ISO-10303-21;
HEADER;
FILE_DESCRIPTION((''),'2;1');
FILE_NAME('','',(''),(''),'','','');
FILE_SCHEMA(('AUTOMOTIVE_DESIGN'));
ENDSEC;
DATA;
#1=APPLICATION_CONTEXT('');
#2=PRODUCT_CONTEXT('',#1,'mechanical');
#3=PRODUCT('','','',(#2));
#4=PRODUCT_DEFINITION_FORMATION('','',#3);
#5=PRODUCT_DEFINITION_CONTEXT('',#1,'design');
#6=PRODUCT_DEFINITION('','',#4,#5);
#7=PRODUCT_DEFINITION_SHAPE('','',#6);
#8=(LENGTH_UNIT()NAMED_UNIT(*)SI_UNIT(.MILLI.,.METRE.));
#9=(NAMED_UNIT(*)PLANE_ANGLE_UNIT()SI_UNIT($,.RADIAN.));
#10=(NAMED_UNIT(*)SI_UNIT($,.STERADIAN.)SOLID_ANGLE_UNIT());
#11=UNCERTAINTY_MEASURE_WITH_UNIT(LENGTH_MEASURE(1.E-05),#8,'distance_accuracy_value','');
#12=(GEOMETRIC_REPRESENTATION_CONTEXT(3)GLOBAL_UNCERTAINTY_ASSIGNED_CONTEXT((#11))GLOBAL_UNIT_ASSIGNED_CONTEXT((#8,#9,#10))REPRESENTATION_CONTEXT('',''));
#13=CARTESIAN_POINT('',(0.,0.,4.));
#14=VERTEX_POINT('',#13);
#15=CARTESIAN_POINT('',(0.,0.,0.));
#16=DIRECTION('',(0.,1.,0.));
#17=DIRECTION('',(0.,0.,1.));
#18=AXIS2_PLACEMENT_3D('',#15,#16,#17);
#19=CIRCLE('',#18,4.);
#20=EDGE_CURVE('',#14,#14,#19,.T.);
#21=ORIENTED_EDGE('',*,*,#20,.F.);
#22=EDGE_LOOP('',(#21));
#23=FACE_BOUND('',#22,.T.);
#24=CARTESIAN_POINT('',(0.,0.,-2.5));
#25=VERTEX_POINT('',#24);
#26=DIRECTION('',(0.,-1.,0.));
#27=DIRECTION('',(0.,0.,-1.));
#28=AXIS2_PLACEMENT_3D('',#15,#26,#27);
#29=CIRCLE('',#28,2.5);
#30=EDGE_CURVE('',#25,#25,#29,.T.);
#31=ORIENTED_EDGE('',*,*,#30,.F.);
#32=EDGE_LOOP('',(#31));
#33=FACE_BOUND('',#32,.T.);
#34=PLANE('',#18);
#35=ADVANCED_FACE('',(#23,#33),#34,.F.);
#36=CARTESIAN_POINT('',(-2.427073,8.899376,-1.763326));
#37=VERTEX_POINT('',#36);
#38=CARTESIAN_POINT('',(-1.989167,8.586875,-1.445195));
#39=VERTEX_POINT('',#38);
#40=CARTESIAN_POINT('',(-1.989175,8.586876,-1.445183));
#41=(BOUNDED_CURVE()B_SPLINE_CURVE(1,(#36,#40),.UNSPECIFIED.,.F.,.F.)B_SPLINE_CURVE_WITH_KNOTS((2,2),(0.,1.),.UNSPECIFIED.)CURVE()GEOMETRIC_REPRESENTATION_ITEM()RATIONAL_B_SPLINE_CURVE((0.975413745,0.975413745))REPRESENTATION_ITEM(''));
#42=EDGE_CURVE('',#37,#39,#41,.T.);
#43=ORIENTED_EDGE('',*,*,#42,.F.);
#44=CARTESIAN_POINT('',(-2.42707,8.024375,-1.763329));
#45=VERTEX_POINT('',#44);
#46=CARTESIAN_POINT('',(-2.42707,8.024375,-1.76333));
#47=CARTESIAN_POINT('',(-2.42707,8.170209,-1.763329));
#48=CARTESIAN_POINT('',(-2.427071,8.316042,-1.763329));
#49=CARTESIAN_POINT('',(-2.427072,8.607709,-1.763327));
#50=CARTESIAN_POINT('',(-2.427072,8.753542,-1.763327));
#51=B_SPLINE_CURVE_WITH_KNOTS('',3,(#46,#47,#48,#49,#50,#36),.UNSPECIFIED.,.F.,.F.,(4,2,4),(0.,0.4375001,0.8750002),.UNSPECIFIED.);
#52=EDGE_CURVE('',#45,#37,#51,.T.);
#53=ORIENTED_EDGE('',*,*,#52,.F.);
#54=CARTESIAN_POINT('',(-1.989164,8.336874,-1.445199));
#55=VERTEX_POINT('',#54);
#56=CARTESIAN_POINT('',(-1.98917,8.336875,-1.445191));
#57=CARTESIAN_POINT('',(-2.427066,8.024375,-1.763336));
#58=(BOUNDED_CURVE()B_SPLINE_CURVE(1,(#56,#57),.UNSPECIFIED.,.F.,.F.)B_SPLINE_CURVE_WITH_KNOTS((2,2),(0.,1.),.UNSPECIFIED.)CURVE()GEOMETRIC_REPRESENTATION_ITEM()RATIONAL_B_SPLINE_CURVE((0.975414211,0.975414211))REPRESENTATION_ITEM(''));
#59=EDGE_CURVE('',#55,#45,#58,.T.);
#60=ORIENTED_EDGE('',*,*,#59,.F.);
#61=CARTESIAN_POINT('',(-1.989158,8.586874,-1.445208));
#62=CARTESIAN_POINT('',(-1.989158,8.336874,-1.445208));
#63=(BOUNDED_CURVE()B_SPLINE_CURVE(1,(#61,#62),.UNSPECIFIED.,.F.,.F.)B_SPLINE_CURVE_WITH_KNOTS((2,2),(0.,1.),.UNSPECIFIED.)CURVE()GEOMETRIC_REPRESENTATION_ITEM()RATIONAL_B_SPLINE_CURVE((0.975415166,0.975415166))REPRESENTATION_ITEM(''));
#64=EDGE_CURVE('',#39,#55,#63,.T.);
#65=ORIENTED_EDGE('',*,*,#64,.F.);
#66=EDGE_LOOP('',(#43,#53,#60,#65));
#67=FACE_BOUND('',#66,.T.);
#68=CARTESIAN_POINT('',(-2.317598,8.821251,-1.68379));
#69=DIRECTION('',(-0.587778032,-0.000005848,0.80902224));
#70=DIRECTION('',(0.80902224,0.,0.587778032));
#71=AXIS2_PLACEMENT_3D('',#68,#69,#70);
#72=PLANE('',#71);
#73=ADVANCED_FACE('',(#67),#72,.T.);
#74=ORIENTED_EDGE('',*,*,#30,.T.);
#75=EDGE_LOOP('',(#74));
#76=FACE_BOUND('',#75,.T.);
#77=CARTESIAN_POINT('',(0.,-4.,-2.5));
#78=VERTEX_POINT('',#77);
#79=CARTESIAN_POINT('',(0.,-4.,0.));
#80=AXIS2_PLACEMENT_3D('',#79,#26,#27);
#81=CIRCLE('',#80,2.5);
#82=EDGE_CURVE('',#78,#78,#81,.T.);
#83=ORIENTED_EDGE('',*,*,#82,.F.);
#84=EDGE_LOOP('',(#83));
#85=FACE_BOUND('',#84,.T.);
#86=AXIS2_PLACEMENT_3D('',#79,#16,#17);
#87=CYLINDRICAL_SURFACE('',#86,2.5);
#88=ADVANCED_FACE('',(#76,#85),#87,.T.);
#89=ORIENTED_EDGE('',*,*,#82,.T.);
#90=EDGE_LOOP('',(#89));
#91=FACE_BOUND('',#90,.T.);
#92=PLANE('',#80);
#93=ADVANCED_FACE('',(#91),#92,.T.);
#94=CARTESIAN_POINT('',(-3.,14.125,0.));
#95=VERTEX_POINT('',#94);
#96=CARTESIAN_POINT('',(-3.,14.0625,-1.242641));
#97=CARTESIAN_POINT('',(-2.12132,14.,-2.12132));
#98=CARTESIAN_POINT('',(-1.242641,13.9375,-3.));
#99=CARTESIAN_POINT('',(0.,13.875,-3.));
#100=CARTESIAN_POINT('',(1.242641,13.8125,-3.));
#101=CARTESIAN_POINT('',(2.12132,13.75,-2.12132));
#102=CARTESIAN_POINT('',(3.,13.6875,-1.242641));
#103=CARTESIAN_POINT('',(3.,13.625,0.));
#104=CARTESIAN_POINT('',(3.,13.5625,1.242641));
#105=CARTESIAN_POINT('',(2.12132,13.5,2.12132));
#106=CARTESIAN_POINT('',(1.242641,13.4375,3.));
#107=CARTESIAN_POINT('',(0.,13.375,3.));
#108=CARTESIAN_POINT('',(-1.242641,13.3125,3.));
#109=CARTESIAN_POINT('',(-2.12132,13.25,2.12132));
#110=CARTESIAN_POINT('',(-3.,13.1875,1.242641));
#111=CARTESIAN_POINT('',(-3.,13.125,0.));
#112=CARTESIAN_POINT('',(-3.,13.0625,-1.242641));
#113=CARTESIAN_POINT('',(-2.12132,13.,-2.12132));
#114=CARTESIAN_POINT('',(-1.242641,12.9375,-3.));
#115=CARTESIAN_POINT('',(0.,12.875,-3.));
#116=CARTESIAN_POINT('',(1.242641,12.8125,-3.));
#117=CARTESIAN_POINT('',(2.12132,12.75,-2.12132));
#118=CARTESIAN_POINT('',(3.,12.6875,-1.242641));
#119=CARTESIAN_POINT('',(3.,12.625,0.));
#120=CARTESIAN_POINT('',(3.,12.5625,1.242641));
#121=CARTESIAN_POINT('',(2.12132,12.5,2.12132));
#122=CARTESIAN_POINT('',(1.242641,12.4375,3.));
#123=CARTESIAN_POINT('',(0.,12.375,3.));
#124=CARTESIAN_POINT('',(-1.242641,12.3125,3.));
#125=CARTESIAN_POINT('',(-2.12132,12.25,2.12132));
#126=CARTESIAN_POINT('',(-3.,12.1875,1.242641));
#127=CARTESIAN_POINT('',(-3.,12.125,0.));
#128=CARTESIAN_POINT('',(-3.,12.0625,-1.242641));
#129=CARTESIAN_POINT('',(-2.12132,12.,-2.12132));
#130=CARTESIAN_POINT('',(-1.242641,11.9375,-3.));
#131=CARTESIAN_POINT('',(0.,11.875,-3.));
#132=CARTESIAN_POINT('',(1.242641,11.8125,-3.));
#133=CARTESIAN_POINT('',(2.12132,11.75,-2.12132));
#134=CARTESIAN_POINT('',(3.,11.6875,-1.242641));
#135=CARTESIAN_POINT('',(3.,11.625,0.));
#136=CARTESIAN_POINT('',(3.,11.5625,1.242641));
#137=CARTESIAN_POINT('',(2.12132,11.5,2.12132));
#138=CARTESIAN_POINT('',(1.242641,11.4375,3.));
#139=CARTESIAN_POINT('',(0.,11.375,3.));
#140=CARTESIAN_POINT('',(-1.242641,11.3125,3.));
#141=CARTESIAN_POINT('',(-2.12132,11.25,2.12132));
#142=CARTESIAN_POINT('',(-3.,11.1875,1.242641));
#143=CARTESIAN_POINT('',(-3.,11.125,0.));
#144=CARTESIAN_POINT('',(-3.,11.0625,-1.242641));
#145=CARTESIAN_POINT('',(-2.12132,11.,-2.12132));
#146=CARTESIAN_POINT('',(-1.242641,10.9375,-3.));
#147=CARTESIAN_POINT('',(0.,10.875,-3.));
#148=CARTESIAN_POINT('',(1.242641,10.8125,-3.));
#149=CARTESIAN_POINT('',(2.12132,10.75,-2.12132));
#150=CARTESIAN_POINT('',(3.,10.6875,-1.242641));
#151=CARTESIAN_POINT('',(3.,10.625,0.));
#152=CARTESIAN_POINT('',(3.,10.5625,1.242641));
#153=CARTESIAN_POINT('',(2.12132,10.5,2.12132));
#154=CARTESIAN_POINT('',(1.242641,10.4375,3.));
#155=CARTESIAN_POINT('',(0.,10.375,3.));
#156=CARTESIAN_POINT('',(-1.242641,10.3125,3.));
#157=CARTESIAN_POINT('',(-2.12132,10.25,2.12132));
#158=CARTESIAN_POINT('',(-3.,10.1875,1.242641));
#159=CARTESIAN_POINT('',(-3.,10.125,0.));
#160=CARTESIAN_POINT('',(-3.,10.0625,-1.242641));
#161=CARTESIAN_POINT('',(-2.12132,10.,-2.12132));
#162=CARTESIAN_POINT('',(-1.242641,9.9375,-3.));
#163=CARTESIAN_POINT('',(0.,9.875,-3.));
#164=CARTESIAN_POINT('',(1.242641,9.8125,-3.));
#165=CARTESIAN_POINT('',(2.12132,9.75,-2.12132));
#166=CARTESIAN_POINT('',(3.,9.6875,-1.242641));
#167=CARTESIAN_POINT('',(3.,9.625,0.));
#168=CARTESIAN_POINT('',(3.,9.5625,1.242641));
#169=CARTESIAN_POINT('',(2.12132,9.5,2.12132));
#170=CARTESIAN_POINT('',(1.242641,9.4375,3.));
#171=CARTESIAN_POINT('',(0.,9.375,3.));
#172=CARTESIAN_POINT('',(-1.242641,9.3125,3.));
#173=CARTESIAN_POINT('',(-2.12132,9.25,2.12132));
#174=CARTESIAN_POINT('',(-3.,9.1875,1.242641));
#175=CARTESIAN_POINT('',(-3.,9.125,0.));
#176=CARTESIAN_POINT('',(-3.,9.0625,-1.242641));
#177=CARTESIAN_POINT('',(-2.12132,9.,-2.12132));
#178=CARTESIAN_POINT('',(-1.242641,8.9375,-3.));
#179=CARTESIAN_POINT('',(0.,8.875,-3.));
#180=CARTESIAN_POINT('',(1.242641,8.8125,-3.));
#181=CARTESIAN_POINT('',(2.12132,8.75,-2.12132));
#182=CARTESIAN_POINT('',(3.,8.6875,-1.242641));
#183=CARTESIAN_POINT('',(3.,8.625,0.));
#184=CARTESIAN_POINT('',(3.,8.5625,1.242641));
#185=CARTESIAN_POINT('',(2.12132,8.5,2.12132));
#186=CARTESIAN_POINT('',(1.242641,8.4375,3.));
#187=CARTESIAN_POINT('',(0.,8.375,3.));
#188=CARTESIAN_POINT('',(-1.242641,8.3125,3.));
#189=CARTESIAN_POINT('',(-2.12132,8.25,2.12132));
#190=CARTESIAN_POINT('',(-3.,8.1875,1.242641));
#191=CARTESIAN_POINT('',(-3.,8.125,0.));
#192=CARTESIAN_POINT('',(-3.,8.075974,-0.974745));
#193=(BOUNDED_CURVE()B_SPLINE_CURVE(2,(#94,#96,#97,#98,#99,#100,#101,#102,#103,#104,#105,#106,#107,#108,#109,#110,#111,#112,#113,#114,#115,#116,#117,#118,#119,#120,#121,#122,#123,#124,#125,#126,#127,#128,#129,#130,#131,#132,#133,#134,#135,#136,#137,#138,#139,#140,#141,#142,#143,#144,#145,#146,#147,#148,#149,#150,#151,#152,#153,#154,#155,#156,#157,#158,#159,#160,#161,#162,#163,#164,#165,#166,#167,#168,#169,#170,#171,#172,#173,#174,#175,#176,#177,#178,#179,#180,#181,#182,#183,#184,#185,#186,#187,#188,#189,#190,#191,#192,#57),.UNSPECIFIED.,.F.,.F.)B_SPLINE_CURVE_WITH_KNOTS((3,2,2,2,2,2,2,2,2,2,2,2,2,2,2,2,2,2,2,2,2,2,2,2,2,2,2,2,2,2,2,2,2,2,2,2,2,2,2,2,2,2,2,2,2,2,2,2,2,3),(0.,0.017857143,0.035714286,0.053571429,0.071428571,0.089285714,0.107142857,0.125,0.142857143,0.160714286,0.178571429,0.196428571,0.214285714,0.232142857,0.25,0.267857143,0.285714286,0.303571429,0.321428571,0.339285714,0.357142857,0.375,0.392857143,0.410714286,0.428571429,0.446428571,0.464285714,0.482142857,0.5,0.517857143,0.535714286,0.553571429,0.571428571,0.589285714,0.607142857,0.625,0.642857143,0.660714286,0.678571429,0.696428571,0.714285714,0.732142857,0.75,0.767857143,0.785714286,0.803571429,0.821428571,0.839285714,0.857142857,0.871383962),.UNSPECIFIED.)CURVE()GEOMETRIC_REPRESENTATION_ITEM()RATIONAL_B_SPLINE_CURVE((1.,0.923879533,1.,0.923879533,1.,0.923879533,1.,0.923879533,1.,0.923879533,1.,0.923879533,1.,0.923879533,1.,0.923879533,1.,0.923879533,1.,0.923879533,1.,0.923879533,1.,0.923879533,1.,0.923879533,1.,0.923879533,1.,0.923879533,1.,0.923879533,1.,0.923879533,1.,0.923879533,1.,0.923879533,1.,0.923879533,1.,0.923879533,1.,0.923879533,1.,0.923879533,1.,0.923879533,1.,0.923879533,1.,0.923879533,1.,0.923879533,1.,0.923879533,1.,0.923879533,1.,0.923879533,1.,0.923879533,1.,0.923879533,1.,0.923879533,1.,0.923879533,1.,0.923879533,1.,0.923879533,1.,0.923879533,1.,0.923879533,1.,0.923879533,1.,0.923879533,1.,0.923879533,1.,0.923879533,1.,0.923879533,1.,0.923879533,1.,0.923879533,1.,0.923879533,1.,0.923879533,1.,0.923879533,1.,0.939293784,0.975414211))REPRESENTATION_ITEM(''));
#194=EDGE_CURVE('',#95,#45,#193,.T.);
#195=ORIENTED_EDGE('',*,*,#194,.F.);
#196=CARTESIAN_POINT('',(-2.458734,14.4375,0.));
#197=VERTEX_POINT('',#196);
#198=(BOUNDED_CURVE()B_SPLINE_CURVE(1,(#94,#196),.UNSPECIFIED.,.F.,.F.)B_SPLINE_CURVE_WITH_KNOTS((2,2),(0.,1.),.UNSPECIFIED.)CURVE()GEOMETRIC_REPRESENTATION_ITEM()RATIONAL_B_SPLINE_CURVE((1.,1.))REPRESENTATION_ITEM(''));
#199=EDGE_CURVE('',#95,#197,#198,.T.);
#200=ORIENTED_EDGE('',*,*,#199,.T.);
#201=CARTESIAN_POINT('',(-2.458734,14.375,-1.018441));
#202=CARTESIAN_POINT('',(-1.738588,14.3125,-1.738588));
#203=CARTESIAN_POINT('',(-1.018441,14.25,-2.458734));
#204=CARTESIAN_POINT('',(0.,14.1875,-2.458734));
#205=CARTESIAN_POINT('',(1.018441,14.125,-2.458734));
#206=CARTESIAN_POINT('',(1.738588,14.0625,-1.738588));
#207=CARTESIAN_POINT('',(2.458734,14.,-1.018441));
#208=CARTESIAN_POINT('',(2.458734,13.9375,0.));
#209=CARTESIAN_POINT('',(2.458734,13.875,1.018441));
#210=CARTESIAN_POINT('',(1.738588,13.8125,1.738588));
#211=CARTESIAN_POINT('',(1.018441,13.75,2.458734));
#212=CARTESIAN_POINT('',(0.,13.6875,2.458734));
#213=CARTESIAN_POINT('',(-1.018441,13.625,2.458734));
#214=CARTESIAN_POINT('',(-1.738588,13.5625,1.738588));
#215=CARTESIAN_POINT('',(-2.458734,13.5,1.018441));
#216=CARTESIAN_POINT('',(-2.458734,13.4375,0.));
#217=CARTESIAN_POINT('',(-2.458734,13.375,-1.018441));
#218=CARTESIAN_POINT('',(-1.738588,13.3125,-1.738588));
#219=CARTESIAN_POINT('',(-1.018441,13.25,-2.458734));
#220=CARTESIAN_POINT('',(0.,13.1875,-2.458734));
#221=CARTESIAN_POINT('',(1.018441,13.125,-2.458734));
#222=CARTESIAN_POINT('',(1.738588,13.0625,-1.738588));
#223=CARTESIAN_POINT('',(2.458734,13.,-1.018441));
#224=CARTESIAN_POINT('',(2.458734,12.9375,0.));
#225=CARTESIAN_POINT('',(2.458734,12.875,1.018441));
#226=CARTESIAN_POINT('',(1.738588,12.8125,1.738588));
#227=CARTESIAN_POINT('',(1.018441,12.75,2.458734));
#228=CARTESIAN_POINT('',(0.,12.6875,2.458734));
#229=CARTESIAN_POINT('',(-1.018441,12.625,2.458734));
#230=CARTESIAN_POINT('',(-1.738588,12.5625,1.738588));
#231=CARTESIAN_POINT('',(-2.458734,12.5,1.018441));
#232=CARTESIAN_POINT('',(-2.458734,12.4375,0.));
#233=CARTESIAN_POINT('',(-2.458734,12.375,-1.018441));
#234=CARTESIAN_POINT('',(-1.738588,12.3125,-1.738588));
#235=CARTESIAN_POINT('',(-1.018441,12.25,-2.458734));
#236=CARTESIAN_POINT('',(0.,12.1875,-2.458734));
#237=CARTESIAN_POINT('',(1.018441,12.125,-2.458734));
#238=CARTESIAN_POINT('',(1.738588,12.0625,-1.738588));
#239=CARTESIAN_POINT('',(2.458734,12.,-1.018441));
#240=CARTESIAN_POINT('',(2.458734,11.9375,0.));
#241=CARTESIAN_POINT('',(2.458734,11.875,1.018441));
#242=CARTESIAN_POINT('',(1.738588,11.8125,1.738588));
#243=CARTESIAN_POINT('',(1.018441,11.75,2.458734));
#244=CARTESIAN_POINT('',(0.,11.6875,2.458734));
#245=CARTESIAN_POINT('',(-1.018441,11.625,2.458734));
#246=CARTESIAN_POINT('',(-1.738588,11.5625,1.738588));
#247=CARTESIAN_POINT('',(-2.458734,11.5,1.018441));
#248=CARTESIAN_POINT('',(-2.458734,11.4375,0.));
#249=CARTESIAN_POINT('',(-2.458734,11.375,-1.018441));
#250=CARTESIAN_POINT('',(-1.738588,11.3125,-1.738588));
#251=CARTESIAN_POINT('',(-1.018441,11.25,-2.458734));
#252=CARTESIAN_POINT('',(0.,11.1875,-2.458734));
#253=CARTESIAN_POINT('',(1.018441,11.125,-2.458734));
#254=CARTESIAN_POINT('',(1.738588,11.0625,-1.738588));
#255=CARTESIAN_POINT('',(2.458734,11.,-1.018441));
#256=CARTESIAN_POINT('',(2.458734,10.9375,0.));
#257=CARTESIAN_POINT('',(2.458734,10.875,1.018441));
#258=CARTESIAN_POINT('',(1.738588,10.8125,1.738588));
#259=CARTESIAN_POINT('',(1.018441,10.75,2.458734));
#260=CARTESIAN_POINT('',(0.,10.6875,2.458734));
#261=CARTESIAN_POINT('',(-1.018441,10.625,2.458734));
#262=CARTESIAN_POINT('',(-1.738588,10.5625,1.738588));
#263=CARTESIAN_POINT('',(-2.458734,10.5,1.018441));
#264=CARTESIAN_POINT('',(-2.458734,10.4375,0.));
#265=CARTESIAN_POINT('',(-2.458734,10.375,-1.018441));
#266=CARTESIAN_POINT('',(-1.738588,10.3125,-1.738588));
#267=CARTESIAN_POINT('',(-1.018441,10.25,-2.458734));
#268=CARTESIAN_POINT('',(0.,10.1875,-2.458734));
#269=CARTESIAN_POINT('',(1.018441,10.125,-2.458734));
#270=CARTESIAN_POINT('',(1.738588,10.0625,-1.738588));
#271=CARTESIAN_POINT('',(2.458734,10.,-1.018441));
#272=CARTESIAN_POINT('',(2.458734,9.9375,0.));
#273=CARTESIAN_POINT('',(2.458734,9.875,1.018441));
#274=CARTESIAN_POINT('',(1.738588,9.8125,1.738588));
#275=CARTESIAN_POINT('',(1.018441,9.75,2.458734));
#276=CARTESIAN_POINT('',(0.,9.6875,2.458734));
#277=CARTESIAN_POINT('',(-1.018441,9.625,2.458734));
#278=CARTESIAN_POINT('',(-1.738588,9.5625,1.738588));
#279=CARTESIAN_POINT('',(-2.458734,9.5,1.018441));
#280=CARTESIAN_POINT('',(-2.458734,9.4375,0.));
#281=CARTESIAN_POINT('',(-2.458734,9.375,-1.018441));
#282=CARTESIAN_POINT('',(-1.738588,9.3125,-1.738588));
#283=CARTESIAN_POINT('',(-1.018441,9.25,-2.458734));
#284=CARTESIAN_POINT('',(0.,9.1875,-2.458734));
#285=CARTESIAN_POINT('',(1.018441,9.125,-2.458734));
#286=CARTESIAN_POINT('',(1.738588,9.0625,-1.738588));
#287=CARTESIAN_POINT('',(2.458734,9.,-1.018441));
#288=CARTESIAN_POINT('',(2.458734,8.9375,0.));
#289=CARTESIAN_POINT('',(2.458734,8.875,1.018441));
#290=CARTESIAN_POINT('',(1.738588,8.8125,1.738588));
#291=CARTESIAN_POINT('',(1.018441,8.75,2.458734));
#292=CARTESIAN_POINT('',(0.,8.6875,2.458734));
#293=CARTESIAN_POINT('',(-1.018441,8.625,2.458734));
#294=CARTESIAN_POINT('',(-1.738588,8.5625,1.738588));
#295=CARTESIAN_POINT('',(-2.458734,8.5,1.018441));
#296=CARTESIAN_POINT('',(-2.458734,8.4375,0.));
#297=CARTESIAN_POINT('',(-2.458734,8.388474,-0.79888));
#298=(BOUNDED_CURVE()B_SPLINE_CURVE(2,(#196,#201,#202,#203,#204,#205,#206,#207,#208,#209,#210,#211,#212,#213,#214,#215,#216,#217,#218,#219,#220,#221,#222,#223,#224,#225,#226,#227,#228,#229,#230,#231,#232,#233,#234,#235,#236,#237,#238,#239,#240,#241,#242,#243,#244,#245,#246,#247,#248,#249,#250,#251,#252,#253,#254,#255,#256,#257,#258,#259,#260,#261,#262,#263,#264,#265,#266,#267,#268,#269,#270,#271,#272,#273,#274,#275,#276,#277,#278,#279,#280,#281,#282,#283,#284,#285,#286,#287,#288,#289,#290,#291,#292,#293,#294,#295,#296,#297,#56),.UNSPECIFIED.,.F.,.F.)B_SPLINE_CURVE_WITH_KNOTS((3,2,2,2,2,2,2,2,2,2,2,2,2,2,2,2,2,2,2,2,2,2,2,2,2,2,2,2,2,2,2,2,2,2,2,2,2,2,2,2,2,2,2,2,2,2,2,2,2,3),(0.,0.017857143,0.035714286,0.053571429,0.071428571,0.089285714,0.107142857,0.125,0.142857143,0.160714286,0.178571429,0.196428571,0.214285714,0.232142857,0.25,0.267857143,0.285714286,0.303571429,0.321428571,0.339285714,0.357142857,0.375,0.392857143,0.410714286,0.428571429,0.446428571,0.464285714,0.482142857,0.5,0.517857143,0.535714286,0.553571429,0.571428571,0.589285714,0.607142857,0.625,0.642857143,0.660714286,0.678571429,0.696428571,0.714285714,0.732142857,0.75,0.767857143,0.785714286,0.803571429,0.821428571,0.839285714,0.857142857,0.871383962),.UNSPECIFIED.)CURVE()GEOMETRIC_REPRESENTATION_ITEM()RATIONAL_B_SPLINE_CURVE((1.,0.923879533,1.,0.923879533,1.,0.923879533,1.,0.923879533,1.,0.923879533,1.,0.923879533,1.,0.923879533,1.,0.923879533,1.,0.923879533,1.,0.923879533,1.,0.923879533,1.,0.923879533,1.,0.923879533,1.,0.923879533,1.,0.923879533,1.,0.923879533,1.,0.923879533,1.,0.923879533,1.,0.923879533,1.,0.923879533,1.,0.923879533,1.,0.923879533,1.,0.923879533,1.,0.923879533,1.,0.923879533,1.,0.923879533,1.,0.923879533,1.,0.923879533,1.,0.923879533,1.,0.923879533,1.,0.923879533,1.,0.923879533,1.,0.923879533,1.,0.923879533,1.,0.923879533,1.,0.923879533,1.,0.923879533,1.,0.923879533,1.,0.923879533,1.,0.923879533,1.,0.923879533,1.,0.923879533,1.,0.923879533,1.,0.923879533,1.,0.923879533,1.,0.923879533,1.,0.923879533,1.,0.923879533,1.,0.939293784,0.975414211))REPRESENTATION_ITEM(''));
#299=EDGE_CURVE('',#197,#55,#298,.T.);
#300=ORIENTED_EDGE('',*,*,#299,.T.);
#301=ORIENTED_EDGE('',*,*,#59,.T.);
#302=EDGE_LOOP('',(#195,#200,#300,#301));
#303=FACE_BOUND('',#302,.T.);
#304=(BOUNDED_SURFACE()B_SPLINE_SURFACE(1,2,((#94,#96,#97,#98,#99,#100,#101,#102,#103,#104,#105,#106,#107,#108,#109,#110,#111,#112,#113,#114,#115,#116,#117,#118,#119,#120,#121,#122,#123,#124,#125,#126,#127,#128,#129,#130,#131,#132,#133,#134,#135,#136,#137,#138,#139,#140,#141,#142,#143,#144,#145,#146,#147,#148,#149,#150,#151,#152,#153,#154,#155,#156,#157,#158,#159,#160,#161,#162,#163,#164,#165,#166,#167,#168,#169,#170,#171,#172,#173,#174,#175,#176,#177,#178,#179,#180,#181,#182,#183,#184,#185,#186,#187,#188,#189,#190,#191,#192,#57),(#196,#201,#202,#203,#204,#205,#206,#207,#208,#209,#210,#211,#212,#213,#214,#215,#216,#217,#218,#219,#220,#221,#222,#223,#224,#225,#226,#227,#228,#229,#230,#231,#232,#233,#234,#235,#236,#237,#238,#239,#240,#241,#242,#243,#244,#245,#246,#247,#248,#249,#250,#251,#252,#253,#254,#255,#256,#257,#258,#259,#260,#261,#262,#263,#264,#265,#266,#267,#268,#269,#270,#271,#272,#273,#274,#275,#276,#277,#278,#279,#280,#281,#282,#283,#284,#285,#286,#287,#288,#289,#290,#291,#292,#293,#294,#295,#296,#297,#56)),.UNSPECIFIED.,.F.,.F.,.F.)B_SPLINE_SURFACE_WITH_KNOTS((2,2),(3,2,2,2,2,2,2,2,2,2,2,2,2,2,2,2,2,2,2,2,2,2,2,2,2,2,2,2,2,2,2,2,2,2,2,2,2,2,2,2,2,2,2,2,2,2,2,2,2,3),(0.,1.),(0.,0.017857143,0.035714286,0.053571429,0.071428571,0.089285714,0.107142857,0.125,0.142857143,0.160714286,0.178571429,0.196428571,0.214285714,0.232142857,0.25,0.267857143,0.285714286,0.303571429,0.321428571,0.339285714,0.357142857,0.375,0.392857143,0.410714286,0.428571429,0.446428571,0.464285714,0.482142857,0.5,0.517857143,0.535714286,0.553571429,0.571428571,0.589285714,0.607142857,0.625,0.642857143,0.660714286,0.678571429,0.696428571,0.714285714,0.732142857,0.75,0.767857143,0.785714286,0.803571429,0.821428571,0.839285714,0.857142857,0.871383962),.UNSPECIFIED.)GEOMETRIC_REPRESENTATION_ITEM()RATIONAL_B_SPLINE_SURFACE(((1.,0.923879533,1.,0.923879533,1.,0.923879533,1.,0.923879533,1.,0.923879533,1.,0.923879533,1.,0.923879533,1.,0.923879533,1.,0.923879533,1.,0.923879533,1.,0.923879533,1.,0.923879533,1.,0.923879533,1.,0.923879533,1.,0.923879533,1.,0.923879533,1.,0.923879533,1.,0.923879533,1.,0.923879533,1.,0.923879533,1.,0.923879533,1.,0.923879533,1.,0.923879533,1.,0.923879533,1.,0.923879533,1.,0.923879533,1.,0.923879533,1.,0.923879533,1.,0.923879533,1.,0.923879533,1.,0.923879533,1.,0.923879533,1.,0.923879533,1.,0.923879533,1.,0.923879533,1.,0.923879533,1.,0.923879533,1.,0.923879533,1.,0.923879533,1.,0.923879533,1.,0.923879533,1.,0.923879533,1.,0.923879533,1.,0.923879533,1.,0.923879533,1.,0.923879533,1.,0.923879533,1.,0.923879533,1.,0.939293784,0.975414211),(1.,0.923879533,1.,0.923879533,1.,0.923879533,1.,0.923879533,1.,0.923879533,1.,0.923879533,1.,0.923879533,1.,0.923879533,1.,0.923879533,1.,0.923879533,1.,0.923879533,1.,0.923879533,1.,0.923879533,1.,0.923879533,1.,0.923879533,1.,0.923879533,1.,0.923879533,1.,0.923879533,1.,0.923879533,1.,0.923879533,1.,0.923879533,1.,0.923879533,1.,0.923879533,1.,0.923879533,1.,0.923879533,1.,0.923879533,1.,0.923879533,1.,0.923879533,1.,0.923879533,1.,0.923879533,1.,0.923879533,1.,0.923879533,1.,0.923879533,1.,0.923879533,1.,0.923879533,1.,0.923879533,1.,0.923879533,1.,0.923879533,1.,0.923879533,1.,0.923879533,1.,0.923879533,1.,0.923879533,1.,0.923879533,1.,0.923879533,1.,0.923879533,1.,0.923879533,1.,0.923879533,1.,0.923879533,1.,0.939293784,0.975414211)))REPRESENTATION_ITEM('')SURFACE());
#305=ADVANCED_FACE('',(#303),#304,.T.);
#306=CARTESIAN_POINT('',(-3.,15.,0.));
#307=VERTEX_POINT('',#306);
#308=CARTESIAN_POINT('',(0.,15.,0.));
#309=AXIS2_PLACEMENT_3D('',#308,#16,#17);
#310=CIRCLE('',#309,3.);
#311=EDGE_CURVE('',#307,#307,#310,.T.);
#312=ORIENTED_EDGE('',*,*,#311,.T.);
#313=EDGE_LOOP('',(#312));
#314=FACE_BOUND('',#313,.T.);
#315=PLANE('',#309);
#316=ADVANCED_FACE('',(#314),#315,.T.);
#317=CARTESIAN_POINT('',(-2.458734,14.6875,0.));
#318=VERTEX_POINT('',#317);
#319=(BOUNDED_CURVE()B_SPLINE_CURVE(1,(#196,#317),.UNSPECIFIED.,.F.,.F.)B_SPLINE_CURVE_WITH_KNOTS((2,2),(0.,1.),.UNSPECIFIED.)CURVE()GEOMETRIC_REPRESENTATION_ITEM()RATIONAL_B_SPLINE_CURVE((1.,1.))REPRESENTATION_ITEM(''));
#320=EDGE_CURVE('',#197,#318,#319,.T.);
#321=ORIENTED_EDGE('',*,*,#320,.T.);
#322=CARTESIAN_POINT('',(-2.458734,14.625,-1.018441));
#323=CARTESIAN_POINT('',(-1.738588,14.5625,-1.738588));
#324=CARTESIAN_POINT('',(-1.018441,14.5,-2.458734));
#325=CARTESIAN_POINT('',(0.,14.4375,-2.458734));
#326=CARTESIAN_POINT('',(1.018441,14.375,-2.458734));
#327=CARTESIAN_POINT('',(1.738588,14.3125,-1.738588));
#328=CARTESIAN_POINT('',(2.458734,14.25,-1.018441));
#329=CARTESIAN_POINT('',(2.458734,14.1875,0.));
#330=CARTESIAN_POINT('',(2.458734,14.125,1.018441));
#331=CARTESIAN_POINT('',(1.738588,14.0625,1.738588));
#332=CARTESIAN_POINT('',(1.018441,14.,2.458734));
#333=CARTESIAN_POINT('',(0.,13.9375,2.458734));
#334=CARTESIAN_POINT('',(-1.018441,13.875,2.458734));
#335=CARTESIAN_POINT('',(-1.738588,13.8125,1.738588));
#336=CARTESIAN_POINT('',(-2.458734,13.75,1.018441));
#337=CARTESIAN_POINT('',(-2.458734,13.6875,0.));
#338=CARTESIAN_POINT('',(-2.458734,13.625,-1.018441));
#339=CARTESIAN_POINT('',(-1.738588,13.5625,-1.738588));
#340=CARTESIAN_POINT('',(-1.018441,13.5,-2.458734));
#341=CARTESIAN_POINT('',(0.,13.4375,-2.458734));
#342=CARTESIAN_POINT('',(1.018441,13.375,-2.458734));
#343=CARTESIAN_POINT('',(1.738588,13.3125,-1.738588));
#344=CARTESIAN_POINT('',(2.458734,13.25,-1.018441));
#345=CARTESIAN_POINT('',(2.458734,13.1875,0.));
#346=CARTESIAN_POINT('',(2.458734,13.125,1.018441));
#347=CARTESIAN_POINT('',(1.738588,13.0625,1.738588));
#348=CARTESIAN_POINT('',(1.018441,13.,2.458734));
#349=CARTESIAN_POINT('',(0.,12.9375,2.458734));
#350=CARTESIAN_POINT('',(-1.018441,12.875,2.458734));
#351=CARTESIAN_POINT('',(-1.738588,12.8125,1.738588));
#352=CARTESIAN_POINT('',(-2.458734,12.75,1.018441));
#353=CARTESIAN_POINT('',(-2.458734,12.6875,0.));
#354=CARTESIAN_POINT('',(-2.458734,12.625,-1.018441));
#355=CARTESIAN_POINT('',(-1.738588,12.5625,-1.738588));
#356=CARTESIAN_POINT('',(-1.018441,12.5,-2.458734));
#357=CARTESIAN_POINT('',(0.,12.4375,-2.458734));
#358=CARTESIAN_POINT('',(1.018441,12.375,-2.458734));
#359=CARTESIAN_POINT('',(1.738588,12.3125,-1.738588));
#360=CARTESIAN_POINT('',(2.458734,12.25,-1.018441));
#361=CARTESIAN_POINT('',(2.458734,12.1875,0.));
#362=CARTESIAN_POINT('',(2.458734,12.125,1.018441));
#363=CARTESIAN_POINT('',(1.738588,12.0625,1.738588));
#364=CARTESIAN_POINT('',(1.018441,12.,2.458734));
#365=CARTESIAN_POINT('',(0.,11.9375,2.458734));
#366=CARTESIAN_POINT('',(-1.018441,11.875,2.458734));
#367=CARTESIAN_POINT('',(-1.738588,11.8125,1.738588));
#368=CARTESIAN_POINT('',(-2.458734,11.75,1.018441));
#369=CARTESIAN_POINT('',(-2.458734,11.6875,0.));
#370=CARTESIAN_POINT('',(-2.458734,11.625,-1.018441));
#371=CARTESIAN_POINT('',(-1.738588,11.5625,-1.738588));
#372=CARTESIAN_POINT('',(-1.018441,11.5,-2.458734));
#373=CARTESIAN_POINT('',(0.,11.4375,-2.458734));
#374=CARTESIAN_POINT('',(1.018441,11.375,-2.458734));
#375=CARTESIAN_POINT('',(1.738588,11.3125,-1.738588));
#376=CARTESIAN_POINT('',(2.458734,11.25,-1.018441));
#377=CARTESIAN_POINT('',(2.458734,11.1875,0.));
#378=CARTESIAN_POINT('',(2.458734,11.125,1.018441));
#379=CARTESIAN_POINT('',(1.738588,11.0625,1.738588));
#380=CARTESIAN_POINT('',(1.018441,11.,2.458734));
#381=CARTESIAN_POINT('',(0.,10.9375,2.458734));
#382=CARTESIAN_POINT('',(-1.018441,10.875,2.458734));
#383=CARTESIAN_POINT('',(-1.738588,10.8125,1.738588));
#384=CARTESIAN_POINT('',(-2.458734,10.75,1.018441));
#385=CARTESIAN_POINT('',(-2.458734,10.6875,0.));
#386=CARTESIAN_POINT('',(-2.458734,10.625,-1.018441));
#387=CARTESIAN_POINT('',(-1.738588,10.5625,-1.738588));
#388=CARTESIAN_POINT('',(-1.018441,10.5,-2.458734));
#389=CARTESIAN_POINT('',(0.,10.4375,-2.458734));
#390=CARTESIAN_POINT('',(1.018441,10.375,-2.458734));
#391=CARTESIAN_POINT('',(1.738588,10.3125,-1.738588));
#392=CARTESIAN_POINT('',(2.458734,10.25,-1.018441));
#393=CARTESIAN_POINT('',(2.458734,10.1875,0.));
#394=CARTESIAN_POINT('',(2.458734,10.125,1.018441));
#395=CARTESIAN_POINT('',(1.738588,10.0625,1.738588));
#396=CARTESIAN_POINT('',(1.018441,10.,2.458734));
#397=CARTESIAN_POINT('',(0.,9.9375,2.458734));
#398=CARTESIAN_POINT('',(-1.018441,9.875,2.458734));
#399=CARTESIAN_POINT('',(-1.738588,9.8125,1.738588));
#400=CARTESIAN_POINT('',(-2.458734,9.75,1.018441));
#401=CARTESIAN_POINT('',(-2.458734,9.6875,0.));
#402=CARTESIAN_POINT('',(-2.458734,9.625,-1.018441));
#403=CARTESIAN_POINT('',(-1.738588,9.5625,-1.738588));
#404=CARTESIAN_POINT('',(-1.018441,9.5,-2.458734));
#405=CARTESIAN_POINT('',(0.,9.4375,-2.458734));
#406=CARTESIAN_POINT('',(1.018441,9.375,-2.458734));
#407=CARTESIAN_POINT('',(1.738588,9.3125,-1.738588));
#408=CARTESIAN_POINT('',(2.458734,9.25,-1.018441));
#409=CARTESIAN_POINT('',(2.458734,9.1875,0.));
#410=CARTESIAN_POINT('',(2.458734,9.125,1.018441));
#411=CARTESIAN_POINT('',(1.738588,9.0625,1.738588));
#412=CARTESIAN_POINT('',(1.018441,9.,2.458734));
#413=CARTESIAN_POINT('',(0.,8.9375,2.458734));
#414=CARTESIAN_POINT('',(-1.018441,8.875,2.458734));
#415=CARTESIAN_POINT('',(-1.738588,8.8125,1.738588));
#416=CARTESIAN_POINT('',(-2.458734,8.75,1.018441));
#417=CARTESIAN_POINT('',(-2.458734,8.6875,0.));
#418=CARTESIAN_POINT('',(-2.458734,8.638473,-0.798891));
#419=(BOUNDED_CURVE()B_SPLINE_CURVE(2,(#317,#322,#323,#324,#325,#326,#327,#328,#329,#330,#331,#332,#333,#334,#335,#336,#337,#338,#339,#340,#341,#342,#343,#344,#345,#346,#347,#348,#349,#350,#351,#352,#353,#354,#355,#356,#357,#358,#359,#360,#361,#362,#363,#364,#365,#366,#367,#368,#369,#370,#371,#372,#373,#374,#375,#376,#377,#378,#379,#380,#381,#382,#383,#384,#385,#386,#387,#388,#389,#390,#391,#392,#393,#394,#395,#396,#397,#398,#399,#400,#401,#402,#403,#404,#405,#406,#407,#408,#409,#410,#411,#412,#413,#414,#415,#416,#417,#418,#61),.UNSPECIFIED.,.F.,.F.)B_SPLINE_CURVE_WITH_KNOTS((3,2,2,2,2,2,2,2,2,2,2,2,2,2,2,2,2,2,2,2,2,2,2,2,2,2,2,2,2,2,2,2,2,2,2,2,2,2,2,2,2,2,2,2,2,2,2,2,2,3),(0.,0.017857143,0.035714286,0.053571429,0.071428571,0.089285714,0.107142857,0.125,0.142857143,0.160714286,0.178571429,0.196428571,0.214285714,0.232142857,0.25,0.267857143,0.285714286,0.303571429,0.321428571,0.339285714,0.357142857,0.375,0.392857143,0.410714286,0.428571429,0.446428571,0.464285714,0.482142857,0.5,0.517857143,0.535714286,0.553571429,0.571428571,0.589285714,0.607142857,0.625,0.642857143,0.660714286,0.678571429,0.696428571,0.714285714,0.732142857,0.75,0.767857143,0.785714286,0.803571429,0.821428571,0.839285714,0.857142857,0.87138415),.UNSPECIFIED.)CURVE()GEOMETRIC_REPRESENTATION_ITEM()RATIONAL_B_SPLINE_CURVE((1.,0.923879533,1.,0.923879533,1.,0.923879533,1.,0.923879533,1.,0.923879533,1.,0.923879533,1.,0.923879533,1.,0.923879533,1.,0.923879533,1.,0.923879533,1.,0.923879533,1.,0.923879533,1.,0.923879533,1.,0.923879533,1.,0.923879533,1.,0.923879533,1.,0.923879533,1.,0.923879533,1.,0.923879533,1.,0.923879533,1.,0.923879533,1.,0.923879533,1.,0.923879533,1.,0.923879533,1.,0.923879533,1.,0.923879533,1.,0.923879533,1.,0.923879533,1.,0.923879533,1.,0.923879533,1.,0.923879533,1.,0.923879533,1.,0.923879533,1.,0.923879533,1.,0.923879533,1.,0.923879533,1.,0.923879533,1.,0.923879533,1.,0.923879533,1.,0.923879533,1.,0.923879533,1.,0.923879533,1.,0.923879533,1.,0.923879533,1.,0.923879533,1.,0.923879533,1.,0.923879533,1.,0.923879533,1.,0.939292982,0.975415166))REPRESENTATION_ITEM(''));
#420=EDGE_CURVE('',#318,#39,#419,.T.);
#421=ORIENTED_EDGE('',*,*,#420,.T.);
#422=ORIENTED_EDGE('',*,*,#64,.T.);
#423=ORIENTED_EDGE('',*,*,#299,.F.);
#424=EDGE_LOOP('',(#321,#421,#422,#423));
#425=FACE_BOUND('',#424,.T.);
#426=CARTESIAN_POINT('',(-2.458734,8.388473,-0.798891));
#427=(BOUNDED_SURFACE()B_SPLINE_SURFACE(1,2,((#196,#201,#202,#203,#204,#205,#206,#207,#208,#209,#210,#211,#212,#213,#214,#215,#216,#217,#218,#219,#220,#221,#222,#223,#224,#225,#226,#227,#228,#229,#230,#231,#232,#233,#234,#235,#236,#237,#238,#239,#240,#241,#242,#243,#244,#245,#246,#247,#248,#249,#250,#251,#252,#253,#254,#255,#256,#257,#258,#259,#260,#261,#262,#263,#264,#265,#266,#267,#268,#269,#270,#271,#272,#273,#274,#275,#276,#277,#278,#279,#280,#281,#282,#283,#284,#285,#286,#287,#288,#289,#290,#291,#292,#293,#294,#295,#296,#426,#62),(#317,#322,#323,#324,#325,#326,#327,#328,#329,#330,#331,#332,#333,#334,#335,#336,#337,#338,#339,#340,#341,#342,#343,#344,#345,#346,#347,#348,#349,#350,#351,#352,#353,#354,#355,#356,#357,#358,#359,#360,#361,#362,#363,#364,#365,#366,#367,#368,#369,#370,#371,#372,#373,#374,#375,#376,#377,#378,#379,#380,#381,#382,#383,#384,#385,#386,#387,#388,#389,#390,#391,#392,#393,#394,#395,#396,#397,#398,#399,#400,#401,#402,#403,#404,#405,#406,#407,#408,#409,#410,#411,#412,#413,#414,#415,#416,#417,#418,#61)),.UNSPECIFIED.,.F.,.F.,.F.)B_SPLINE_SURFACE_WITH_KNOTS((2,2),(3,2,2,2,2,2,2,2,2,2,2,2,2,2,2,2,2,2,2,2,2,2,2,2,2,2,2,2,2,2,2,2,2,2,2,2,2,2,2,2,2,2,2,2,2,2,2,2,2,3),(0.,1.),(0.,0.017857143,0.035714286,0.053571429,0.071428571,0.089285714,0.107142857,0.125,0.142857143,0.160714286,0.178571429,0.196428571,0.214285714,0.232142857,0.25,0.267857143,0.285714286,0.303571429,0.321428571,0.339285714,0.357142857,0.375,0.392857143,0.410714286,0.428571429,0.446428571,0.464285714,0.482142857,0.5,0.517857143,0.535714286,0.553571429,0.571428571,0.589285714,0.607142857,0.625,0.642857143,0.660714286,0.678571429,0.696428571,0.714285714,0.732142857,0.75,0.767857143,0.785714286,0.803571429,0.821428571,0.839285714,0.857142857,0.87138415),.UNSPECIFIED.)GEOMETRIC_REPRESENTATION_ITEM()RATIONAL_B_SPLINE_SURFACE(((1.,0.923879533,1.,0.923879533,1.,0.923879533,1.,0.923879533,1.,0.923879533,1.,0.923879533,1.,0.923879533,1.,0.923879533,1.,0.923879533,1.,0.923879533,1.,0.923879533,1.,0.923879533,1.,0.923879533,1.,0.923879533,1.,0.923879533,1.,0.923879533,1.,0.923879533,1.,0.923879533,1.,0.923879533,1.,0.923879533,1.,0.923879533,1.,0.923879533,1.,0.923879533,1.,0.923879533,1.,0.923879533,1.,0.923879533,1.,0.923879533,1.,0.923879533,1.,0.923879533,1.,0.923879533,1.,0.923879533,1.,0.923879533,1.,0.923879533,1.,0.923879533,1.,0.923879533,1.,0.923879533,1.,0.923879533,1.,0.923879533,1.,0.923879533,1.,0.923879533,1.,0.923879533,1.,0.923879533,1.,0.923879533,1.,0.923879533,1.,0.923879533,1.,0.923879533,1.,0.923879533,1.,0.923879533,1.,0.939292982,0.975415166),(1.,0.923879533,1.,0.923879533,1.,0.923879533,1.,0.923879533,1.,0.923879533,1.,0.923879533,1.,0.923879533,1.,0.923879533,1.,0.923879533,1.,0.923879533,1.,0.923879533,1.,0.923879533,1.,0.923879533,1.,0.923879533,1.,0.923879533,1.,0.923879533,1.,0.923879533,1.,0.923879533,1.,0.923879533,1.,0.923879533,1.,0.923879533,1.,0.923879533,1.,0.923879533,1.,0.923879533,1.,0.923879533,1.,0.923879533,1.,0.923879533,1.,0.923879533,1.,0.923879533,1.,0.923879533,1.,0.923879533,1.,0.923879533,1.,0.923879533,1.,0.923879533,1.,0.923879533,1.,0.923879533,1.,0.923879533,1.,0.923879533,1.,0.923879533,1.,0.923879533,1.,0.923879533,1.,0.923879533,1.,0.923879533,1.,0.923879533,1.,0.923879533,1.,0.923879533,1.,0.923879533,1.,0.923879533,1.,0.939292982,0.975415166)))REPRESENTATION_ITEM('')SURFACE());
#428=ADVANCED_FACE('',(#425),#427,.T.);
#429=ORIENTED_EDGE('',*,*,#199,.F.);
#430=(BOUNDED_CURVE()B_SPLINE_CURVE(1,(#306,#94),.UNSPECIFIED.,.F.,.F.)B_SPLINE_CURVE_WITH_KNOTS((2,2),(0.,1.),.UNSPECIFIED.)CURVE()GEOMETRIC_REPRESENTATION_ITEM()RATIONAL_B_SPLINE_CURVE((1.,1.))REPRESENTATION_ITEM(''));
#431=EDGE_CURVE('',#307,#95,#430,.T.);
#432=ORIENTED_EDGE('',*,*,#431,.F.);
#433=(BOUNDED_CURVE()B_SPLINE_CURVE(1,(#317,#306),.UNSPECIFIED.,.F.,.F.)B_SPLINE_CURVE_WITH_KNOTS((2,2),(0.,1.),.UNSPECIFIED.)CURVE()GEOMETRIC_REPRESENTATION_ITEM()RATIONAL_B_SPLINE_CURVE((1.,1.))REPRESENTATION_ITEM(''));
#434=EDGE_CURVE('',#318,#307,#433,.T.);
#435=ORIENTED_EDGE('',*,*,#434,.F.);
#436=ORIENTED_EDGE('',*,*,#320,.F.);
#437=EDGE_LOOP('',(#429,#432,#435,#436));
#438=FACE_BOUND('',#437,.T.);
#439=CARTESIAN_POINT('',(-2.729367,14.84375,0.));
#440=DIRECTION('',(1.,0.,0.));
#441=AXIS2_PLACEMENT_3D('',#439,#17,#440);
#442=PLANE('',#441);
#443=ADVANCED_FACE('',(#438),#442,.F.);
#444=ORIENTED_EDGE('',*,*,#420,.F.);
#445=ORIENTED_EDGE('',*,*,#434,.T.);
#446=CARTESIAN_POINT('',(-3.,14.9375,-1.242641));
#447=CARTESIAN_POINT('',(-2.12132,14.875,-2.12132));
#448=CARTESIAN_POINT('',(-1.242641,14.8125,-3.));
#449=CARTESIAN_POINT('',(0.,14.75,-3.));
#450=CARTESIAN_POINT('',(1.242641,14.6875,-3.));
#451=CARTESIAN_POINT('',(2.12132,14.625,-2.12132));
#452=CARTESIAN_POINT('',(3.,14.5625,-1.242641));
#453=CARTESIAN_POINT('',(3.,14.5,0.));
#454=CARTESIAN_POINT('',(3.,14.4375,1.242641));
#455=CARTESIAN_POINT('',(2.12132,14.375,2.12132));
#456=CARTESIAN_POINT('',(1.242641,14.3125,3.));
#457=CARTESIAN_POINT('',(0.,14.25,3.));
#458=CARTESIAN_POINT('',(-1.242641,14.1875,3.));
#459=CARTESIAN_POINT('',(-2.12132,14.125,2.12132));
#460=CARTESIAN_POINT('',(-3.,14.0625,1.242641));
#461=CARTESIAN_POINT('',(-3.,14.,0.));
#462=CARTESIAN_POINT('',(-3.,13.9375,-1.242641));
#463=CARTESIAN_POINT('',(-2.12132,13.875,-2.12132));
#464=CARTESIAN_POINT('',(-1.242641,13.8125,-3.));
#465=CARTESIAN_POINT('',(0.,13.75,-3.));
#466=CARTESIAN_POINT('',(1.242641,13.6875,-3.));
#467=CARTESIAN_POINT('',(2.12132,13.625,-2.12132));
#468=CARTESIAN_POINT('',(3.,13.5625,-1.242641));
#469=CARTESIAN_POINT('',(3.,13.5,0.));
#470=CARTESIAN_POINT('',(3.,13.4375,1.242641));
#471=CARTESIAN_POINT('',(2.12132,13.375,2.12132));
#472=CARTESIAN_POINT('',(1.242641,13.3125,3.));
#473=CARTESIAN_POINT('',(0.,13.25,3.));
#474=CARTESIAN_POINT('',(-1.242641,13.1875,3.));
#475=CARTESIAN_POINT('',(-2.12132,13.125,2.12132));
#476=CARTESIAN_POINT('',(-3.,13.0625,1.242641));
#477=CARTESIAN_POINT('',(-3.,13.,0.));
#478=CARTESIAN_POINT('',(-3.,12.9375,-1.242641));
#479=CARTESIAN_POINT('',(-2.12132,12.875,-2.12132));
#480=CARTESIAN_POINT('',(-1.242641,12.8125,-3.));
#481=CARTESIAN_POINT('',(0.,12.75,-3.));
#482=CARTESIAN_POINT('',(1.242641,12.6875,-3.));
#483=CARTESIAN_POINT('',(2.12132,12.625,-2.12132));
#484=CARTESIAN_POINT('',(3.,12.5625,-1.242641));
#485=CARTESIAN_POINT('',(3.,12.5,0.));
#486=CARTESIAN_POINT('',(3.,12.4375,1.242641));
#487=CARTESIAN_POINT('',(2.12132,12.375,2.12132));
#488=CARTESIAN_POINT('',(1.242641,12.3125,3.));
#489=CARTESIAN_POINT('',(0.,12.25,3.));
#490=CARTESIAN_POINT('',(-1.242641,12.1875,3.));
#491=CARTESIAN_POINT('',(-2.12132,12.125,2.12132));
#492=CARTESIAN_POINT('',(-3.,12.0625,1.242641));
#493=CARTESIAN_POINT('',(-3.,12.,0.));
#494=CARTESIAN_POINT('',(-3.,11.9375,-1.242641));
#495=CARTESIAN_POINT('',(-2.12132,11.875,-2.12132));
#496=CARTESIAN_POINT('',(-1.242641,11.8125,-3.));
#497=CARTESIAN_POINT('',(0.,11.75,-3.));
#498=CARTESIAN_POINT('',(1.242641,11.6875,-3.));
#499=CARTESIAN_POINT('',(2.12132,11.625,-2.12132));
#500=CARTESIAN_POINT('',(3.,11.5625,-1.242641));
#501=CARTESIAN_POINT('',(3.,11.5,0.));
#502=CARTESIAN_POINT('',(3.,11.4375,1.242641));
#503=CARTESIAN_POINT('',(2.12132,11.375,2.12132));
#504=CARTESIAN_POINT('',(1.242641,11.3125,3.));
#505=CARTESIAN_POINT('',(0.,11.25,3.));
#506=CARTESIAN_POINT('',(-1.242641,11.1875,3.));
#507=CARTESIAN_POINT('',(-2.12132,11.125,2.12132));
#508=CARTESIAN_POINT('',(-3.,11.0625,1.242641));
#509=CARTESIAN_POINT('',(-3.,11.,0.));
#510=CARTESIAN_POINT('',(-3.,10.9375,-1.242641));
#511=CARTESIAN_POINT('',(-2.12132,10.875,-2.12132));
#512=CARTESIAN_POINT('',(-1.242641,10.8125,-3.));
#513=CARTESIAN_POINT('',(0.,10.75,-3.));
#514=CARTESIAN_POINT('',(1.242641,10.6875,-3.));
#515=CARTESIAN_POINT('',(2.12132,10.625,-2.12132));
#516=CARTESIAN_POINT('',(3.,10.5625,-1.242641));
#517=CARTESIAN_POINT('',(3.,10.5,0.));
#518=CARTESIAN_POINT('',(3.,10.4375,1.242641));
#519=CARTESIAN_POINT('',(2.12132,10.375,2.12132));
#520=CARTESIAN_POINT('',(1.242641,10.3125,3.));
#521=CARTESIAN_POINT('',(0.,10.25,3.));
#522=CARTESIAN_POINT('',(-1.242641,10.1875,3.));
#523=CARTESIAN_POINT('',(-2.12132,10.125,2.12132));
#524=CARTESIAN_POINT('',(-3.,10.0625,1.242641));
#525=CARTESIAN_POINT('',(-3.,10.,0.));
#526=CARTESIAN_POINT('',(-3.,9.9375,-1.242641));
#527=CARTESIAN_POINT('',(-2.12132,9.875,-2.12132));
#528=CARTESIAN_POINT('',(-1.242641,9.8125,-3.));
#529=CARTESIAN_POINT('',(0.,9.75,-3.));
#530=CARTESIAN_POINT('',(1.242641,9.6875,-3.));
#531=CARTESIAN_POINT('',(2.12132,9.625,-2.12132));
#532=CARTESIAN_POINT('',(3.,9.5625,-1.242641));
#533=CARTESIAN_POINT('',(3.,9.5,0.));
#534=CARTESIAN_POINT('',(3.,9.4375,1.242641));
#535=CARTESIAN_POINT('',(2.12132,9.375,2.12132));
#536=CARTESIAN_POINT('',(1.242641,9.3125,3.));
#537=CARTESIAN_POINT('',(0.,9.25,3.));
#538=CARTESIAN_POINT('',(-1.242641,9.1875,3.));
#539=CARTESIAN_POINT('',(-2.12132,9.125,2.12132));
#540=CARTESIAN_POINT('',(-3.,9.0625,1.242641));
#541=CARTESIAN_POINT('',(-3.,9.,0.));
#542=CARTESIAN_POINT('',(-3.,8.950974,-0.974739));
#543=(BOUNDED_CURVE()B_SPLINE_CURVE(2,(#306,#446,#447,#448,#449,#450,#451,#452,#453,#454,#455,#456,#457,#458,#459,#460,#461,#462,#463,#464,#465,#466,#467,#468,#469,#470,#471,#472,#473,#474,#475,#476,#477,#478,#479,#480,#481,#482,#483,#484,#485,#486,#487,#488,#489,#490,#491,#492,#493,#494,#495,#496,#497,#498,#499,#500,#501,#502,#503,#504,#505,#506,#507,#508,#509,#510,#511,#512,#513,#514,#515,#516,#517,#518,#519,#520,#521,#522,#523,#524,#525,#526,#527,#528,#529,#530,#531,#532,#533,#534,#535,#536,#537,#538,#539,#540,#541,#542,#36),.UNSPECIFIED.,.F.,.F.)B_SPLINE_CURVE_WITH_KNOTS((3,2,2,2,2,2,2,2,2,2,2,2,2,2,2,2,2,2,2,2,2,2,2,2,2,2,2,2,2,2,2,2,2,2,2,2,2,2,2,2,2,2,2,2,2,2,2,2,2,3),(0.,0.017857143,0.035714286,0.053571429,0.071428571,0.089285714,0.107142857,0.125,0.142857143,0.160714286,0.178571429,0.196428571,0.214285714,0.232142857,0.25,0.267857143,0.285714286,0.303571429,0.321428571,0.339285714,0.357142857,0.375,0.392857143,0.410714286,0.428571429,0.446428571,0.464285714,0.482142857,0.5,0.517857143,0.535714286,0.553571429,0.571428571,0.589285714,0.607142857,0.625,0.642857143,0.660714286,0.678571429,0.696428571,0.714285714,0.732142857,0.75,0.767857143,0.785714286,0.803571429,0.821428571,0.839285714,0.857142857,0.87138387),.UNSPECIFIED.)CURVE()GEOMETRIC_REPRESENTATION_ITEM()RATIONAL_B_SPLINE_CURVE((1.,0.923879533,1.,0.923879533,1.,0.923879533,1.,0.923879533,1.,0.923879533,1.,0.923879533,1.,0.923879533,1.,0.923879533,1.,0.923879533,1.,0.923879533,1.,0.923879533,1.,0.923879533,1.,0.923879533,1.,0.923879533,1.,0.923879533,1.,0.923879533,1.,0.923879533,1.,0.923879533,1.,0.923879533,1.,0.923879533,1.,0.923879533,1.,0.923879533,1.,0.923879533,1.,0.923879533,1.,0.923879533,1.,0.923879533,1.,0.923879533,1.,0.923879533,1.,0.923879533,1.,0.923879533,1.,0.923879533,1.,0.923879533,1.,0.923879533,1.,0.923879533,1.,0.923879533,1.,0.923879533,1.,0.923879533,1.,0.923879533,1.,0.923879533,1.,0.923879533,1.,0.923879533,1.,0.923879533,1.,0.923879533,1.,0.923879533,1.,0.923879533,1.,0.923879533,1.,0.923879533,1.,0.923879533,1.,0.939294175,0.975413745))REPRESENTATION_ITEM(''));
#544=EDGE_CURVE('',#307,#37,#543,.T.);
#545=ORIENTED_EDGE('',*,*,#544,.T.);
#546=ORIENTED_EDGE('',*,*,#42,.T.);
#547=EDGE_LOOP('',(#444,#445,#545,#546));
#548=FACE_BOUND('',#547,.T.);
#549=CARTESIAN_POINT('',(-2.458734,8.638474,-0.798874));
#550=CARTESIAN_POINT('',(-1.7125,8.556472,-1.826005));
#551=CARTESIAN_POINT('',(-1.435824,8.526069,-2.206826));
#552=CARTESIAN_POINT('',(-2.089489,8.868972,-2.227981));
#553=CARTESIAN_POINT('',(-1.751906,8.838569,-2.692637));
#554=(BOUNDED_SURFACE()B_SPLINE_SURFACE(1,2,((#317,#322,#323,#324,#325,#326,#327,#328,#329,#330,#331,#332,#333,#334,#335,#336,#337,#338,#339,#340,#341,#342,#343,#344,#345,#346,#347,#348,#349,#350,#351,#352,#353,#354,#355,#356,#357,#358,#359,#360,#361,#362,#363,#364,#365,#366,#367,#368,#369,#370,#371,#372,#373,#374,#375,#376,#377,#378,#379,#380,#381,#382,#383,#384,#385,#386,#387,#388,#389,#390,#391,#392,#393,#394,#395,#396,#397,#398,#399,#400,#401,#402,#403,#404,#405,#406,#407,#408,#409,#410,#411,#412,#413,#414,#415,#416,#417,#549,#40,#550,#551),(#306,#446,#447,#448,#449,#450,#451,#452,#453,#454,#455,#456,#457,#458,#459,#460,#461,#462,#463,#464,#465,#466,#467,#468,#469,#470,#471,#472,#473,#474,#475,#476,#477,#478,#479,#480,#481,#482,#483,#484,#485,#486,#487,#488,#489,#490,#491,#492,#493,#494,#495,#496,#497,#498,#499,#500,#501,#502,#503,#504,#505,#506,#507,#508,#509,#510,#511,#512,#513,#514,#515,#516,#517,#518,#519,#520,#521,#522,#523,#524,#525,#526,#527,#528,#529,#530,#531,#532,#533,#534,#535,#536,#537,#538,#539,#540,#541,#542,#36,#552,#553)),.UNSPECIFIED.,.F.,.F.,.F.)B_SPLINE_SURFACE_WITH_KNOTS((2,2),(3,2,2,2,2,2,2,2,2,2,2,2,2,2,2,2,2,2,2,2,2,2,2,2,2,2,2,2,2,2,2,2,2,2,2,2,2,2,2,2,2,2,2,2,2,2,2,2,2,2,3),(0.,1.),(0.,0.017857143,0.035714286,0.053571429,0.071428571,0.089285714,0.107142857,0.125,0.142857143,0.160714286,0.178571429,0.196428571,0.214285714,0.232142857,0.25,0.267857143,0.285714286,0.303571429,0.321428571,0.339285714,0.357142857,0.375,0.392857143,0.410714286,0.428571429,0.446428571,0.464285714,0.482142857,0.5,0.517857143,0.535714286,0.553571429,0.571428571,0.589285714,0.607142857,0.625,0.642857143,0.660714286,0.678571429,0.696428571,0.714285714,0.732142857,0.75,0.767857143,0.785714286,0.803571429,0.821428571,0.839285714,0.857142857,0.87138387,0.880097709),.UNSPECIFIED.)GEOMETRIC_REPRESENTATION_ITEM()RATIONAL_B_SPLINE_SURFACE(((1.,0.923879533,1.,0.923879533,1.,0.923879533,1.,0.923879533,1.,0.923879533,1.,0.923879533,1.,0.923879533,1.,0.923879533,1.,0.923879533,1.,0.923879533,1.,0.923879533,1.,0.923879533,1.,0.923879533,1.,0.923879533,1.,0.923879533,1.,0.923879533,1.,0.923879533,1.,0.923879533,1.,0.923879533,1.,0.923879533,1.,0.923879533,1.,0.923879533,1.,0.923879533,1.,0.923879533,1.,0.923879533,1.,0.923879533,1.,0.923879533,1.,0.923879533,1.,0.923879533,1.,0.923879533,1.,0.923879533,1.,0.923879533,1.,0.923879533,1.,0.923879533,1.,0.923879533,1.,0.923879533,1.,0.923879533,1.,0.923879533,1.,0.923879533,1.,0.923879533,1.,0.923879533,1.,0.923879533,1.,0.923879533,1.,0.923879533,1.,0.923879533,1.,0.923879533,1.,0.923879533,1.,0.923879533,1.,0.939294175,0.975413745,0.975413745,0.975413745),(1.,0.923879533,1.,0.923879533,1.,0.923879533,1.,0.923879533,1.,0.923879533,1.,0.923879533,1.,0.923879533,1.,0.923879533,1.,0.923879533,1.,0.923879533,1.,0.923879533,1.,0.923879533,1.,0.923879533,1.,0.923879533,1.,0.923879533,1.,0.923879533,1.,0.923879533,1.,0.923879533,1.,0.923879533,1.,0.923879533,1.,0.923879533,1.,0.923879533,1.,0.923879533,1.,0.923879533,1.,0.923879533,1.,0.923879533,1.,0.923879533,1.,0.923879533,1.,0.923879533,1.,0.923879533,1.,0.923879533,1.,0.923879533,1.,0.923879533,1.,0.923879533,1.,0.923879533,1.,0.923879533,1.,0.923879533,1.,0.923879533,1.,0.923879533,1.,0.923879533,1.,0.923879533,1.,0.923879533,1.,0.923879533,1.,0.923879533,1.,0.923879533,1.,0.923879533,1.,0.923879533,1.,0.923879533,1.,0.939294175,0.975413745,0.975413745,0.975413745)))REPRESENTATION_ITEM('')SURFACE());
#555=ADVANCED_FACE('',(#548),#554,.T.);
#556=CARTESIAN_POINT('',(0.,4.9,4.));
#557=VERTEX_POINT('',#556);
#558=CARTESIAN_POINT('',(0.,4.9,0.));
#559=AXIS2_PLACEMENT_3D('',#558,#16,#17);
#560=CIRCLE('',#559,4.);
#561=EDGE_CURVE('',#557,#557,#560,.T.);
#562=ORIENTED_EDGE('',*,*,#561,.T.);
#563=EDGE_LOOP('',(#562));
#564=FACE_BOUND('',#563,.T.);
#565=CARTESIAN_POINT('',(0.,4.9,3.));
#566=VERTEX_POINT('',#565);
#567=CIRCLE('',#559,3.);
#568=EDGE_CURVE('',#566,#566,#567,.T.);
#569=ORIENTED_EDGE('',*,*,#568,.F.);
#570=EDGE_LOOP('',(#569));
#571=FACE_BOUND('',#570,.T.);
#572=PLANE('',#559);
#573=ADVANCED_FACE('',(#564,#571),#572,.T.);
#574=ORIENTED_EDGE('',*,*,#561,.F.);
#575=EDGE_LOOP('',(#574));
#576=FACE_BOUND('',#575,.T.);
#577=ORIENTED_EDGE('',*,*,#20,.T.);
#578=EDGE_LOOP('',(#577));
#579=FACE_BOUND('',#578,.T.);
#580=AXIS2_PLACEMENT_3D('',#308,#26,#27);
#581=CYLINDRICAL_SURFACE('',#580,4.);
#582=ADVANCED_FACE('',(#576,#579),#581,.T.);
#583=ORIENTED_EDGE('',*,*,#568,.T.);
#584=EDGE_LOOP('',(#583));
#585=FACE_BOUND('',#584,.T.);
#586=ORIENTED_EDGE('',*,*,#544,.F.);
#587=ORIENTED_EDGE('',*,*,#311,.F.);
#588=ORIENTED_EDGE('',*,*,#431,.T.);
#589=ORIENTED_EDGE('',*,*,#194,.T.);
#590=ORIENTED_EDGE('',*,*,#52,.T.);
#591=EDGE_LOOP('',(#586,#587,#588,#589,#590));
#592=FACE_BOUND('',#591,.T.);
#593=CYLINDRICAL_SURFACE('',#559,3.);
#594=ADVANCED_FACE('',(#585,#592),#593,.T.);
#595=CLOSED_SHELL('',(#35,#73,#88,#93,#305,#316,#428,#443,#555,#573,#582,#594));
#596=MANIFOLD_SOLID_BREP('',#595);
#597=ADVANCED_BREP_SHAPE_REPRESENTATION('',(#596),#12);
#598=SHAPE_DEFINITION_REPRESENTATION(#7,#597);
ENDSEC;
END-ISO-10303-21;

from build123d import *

# Parameters (mm, degrees)
SKETCH1_R           = 4
BOSS_EXTRUDE1_DEPTH = 15
CUT_EXTRUDE1_START  = -10.1
SKETCH2_R           = 4
SKETCH2_R_2         = 3
CUT_EXTRUDE1_DEPTH  = 10.1
THREAD1_PITCH       = 1
SKETCH3_R           = 2.5
BOSS_EXTRUDE2_DEPTH = 4


with BuildPart() as part:
    # Sketch1 → Boss-Extrude1 (new body)
    with BuildSketch(Plane(origin=(0, 0, 0), x_dir=(1, 0, 0), z_dir=(0, 1, 0))):
        with Locations(Location((0, 0, 0), (0, 0, 270))):
            Circle(SKETCH1_R)
    extrude(amount=BOSS_EXTRUDE1_DEPTH)

    # Sketch2 → Cut-Extrude1 (cut)
    with BuildSketch(Plane(origin=(0, 15, 0), x_dir=(1, 0, 0), z_dir=(0, 1, 0)).offset(CUT_EXTRUDE1_START)):
        with Locations(Location((0, 0, 0), (0, 0, 270))):
            Circle(SKETCH2_R)
        with Locations(Location((0, 0, 0), (0, 0, 270))):
            Circle(SKETCH2_R_2, mode=Mode.SUBTRACT)
    extrude(amount=CUT_EXTRUDE1_DEPTH, mode=Mode.SUBTRACT)

    # Thread1: the profile of Thread Profile1 profile screwed along a right-hand helix of 6.1 turns, 8 arcs to a turn; built about Z, then put on its axis
    thread1_z = Axis((0, 0, 0), (0, 0, 1))
    thread1_corners = [(3.0003, 0, -0.000173205), (3.0003, 0, 0.875173202), (2.458734125, 0, 0.562499999), (2.458734125, 0, 0.312499999)]
    with BuildLine(mode=Mode.PRIVATE) as thread1_profile:
        Line(thread1_corners[0], thread1_corners[1])
        Line(thread1_corners[1], thread1_corners[2])
        Line(thread1_corners[2], thread1_corners[3])
        Line(thread1_corners[3], thread1_corners[0])
    thread1_cap = Face(thread1_profile.wire())
    thread1_turn_angles = [0, 22.5, 45, 67.5, 90, 112.5, 135, 157.5, 180, 202.5, 225, 247.5, 270, 292.5, 315, 337.5, 360]
    thread1_turn_weights = [1, 0.9238795325112867, 1, 0.9238795325112867, 1, 0.9238795325112867, 1, 0.9238795325112867, 1, 0.9238795325112867, 1, 0.9238795325112867, 1, 0.9238795325112867, 1, 0.9238795325112867, 1]
    thread1_turn_rails = [Edge.make_bspline([Vector(p[0], p[1], 0).rotate(thread1_z, thread1_turn_angles[k]) / thread1_turn_weights[k] + Vector(0, 0, p[2] + THREAD1_PITCH * thread1_turn_angles[k] / 360) for k in range(17)], [0, 0, 0, 1, 1, 2, 2, 3, 3, 4, 4, 5, 5, 6, 6, 7, 7, 8, 8, 8], 2, thread1_turn_weights) for p in thread1_corners]
    thread1_turn_sides = [Face.make_surface_from_curves(thread1_turn_rails[p[0]], thread1_turn_rails[p[1]]) for p in [(0, 1), (1, 2), (2, 3), (3, 0)]]
    thread1_last_angles = [2160, 2178, 2196]
    thread1_last_weights = [1, 0.9510565162951535, 1]
    thread1_last_rails = [Edge.make_bspline([Vector(p[0], p[1], 0).rotate(thread1_z, thread1_last_angles[k]) / thread1_last_weights[k] + Vector(0, 0, p[2] + THREAD1_PITCH * thread1_last_angles[k] / 360) for k in range(3)], [0, 0, 0, 1, 1, 1], 2, thread1_last_weights) for p in thread1_corners]
    thread1_last_sides = [Face.make_surface_from_curves(thread1_last_rails[p[0]], thread1_last_rails[p[1]]) for p in [(0, 1), (1, 2), (2, 3), (3, 0)]]
    thread1 = Plane(origin=(0, 15, 0), x_dir=(-1, 0, 0), z_dir=(0, -1, 0)) * Solid(Shell([*[p.moved(Location((0, 0, THREAD1_PITCH * i))) for i in range(6) for p in thread1_turn_sides], *thread1_last_sides, thread1_cap, thread1_cap.rotate(thread1_z, 2196).moved(Location((0, 0, THREAD1_PITCH * 2196 / 360)))]))
    add(thread1, mode=Mode.SUBTRACT)

    # Sketch3 → Boss-Extrude2 (add)
    with BuildSketch(Plane.XZ):
        with Locations(Location((0, 0, 0), (0, 0, 270))):
            Circle(SKETCH3_R)
    extrude(amount=BOSS_EXTRUDE2_DEPTH)


solid = part.part
